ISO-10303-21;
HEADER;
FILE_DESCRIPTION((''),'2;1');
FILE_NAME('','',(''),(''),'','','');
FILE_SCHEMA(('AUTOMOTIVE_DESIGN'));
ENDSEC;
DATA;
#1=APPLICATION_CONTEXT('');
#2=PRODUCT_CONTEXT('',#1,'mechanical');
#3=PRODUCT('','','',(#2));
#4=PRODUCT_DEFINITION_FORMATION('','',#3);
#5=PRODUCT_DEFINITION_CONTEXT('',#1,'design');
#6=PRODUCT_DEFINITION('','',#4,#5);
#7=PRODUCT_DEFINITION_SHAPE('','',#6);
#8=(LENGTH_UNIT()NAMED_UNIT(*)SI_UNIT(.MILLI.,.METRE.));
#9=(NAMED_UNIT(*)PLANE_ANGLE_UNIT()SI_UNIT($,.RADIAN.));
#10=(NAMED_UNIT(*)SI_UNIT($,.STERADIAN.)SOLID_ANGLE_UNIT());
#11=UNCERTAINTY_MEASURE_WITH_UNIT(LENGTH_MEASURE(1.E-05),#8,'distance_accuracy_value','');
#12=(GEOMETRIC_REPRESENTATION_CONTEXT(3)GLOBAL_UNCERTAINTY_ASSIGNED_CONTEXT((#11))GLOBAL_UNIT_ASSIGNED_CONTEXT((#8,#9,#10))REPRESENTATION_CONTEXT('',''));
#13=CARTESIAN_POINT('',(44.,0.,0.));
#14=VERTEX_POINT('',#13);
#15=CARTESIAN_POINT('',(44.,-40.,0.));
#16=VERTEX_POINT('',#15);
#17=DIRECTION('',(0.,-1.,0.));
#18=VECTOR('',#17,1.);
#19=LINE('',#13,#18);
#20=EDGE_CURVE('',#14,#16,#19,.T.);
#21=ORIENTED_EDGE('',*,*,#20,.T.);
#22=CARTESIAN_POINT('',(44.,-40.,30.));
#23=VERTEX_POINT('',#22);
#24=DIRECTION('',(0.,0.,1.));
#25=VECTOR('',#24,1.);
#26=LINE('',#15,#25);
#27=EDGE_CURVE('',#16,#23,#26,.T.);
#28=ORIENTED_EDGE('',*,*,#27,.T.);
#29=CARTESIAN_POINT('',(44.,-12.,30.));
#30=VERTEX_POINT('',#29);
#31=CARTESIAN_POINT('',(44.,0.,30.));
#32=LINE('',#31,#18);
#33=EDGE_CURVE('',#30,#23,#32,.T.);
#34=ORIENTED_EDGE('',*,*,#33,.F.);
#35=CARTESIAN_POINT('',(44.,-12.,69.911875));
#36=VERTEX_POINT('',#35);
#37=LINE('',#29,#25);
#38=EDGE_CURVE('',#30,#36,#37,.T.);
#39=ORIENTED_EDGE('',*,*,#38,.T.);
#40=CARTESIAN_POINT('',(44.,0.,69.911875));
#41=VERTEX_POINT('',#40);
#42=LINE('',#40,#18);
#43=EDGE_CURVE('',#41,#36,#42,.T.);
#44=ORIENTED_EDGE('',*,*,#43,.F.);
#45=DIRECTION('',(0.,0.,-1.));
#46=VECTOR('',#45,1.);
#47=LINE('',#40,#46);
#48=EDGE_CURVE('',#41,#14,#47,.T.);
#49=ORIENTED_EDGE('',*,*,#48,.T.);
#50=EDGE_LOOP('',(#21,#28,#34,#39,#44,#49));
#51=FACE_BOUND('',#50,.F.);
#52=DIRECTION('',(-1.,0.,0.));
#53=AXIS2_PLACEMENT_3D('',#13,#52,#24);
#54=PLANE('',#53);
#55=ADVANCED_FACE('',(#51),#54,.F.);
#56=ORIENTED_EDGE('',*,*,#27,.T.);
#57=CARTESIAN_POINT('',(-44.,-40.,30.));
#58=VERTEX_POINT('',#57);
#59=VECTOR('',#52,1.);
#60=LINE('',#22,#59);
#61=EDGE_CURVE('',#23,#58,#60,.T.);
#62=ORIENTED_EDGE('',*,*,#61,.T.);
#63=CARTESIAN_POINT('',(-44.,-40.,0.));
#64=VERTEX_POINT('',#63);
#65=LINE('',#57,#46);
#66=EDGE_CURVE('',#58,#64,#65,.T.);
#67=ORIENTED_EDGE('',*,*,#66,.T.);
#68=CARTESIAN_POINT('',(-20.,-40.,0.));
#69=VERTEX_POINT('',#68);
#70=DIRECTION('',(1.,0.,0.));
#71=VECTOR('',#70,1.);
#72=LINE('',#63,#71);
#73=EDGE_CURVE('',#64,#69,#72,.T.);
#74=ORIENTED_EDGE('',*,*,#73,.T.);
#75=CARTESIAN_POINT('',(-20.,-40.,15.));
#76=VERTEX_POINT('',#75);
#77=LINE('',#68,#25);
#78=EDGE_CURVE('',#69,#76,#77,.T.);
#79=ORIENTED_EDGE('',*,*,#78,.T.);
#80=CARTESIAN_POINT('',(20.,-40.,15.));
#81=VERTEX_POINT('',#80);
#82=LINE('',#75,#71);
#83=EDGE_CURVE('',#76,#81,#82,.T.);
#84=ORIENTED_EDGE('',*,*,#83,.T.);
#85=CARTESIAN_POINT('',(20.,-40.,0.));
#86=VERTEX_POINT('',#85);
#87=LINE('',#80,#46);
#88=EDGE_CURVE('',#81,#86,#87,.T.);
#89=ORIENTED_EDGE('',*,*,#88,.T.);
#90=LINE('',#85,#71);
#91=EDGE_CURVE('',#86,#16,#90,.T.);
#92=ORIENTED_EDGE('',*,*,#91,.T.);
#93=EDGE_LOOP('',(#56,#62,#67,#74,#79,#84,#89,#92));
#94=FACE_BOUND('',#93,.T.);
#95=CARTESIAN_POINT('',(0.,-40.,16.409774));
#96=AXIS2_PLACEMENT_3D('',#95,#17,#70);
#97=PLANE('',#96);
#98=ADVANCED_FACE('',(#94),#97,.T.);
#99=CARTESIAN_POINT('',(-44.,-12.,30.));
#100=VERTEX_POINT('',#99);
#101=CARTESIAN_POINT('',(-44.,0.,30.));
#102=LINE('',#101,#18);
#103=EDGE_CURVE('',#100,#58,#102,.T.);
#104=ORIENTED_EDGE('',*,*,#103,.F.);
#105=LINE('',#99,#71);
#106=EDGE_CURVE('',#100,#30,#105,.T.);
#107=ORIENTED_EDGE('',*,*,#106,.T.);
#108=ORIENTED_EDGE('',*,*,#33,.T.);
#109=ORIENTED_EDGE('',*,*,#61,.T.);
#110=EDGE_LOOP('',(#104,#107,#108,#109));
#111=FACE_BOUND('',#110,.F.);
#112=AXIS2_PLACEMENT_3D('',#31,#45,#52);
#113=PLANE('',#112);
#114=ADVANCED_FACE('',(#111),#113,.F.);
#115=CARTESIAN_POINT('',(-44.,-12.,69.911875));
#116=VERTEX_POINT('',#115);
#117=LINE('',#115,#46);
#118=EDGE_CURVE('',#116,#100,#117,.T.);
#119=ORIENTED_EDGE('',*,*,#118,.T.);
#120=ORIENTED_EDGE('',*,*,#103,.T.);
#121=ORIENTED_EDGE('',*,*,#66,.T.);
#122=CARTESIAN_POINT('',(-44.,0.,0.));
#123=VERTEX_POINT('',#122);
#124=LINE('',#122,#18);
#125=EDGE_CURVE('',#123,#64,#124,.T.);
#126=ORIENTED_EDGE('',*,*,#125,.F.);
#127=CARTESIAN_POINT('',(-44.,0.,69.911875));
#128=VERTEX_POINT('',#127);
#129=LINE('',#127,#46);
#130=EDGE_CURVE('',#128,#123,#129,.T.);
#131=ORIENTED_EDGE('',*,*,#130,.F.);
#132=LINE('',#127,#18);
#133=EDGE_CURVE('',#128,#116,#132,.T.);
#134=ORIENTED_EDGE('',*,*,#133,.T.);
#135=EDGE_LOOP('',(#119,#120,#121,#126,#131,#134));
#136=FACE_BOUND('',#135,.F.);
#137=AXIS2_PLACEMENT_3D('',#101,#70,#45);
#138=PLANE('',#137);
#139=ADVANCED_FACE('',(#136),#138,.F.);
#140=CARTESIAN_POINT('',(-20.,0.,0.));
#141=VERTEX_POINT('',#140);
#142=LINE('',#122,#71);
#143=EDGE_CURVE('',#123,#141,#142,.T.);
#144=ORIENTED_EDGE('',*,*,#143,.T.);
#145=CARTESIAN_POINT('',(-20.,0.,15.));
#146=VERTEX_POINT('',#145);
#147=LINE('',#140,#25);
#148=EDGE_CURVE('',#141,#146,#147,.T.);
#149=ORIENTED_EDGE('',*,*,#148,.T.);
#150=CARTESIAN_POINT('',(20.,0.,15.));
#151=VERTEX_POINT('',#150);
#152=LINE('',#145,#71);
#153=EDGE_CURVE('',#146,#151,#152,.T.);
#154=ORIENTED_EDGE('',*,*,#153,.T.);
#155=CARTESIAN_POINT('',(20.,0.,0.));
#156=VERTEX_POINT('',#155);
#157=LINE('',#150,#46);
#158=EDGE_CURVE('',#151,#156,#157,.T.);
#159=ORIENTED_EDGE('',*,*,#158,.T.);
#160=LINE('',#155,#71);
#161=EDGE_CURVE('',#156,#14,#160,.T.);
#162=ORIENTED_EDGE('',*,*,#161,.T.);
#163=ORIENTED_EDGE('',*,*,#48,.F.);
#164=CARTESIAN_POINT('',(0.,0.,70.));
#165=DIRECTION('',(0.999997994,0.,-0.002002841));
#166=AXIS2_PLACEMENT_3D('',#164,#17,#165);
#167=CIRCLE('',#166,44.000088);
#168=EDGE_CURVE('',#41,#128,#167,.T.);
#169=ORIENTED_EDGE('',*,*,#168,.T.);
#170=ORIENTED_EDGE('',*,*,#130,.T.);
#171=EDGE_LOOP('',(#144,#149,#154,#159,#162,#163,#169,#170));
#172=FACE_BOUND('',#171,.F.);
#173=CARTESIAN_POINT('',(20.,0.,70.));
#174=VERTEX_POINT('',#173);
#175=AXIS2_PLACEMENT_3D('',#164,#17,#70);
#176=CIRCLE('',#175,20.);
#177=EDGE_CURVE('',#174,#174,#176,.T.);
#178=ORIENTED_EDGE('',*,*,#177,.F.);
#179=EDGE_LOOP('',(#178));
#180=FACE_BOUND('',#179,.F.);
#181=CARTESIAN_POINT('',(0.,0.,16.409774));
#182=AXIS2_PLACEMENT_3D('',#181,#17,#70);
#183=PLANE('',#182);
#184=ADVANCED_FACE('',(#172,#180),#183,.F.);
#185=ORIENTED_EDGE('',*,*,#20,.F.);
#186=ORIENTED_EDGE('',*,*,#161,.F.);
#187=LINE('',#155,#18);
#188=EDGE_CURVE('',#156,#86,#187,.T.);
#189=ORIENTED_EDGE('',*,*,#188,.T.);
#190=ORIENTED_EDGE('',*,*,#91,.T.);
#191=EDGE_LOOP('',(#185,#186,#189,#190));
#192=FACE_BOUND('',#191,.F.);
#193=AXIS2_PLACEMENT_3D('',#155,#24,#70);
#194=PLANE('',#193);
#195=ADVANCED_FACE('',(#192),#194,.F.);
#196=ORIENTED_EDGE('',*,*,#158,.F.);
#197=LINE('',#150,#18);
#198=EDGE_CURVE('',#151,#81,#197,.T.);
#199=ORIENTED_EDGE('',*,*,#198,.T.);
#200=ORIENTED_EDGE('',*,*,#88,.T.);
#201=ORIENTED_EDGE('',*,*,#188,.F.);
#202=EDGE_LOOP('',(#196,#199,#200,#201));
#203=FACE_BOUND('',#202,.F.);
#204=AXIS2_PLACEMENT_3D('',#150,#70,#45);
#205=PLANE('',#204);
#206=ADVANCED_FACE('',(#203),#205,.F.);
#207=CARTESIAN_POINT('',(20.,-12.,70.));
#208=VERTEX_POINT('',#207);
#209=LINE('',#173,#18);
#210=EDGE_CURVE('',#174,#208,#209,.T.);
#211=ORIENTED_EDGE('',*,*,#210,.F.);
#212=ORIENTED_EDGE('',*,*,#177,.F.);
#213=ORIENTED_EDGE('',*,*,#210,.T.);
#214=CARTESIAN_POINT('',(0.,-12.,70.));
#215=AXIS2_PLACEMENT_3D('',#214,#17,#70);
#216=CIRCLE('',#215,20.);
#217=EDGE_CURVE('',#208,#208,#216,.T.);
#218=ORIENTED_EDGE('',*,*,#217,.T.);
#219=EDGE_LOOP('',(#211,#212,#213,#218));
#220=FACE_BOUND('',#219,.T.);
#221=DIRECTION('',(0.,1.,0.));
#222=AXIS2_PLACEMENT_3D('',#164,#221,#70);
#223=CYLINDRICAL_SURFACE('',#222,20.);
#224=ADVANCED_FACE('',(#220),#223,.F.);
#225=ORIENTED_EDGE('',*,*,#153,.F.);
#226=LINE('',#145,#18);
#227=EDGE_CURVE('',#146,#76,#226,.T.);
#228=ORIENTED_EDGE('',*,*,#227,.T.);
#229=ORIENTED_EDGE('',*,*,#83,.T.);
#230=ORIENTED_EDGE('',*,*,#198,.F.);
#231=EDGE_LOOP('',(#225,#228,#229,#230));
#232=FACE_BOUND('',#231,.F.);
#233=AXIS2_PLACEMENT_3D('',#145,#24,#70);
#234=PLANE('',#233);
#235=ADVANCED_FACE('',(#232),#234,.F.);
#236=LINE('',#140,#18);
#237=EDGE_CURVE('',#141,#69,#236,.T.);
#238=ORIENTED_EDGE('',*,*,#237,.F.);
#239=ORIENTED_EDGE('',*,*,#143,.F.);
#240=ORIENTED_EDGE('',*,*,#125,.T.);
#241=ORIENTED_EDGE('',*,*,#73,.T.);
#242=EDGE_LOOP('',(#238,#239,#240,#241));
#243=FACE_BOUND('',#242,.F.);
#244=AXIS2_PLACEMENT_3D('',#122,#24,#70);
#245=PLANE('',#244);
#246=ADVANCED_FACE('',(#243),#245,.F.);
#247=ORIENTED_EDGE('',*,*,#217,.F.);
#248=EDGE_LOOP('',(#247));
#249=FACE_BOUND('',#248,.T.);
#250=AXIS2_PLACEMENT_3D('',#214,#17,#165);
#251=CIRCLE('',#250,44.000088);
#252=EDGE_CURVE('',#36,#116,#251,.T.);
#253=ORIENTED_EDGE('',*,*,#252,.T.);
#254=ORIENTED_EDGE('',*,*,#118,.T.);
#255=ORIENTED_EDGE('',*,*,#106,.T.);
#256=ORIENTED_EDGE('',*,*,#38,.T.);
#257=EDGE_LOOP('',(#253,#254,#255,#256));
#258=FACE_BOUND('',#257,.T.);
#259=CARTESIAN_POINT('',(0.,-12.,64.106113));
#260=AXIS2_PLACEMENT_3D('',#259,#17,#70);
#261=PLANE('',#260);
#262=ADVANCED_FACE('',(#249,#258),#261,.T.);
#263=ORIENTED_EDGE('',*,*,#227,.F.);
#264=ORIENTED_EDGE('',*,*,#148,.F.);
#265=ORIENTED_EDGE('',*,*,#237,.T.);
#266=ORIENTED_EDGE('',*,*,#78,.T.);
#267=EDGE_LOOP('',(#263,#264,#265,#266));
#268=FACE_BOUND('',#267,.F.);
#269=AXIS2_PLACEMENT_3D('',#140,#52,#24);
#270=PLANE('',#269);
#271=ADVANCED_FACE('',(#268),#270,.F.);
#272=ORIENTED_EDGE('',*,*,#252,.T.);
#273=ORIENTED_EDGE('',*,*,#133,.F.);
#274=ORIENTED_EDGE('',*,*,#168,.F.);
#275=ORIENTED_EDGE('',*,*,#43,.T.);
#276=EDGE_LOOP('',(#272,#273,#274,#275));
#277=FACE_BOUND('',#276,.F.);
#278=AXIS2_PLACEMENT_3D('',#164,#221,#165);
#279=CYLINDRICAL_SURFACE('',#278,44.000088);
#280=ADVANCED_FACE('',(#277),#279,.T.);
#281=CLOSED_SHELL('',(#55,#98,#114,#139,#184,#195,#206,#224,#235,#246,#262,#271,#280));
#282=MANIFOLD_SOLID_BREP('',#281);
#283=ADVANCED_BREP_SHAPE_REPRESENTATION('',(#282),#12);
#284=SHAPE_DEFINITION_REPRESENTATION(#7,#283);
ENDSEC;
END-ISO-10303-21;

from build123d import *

# Parameters (mm, degrees)
F0_R     = 20
F1_DEPTH = 12
F3_DEPTH = 40


# Not quite as in the source:
# - the program builds the solid bodies; features that only make, move or delete a surface that nothing else refers to are left out


with BuildPart() as f1:
    # F0 (on Front) → F1 (new body)
    with BuildSketch(Plane.XZ):
        with BuildLine():
            Line((-44, 69.9118748307), (-44, 30))
            Line((-44, 30), (44, 30))
            Line((44, 30), (44, 69.9118748307))
            ThreePointArc((44, 69.9118748307), (0, 114.0000882504), (-44, 69.9118748307))
        make_face()
        with Locations((0, 70)):
            Circle(F0_R, mode=Mode.SUBTRACT)
    extrude(amount=F1_DEPTH)

    # F0 (on Front) → F3 (join)
    with BuildSketch(Plane.XZ):
        Polygon((-44, 30), (-44, 0), (-20, 0), (-20, 15), (20, 15), (20, 0), (44, 0), (44, 30), align=None)
    extrude(amount=F3_DEPTH)


solid = f1.part
